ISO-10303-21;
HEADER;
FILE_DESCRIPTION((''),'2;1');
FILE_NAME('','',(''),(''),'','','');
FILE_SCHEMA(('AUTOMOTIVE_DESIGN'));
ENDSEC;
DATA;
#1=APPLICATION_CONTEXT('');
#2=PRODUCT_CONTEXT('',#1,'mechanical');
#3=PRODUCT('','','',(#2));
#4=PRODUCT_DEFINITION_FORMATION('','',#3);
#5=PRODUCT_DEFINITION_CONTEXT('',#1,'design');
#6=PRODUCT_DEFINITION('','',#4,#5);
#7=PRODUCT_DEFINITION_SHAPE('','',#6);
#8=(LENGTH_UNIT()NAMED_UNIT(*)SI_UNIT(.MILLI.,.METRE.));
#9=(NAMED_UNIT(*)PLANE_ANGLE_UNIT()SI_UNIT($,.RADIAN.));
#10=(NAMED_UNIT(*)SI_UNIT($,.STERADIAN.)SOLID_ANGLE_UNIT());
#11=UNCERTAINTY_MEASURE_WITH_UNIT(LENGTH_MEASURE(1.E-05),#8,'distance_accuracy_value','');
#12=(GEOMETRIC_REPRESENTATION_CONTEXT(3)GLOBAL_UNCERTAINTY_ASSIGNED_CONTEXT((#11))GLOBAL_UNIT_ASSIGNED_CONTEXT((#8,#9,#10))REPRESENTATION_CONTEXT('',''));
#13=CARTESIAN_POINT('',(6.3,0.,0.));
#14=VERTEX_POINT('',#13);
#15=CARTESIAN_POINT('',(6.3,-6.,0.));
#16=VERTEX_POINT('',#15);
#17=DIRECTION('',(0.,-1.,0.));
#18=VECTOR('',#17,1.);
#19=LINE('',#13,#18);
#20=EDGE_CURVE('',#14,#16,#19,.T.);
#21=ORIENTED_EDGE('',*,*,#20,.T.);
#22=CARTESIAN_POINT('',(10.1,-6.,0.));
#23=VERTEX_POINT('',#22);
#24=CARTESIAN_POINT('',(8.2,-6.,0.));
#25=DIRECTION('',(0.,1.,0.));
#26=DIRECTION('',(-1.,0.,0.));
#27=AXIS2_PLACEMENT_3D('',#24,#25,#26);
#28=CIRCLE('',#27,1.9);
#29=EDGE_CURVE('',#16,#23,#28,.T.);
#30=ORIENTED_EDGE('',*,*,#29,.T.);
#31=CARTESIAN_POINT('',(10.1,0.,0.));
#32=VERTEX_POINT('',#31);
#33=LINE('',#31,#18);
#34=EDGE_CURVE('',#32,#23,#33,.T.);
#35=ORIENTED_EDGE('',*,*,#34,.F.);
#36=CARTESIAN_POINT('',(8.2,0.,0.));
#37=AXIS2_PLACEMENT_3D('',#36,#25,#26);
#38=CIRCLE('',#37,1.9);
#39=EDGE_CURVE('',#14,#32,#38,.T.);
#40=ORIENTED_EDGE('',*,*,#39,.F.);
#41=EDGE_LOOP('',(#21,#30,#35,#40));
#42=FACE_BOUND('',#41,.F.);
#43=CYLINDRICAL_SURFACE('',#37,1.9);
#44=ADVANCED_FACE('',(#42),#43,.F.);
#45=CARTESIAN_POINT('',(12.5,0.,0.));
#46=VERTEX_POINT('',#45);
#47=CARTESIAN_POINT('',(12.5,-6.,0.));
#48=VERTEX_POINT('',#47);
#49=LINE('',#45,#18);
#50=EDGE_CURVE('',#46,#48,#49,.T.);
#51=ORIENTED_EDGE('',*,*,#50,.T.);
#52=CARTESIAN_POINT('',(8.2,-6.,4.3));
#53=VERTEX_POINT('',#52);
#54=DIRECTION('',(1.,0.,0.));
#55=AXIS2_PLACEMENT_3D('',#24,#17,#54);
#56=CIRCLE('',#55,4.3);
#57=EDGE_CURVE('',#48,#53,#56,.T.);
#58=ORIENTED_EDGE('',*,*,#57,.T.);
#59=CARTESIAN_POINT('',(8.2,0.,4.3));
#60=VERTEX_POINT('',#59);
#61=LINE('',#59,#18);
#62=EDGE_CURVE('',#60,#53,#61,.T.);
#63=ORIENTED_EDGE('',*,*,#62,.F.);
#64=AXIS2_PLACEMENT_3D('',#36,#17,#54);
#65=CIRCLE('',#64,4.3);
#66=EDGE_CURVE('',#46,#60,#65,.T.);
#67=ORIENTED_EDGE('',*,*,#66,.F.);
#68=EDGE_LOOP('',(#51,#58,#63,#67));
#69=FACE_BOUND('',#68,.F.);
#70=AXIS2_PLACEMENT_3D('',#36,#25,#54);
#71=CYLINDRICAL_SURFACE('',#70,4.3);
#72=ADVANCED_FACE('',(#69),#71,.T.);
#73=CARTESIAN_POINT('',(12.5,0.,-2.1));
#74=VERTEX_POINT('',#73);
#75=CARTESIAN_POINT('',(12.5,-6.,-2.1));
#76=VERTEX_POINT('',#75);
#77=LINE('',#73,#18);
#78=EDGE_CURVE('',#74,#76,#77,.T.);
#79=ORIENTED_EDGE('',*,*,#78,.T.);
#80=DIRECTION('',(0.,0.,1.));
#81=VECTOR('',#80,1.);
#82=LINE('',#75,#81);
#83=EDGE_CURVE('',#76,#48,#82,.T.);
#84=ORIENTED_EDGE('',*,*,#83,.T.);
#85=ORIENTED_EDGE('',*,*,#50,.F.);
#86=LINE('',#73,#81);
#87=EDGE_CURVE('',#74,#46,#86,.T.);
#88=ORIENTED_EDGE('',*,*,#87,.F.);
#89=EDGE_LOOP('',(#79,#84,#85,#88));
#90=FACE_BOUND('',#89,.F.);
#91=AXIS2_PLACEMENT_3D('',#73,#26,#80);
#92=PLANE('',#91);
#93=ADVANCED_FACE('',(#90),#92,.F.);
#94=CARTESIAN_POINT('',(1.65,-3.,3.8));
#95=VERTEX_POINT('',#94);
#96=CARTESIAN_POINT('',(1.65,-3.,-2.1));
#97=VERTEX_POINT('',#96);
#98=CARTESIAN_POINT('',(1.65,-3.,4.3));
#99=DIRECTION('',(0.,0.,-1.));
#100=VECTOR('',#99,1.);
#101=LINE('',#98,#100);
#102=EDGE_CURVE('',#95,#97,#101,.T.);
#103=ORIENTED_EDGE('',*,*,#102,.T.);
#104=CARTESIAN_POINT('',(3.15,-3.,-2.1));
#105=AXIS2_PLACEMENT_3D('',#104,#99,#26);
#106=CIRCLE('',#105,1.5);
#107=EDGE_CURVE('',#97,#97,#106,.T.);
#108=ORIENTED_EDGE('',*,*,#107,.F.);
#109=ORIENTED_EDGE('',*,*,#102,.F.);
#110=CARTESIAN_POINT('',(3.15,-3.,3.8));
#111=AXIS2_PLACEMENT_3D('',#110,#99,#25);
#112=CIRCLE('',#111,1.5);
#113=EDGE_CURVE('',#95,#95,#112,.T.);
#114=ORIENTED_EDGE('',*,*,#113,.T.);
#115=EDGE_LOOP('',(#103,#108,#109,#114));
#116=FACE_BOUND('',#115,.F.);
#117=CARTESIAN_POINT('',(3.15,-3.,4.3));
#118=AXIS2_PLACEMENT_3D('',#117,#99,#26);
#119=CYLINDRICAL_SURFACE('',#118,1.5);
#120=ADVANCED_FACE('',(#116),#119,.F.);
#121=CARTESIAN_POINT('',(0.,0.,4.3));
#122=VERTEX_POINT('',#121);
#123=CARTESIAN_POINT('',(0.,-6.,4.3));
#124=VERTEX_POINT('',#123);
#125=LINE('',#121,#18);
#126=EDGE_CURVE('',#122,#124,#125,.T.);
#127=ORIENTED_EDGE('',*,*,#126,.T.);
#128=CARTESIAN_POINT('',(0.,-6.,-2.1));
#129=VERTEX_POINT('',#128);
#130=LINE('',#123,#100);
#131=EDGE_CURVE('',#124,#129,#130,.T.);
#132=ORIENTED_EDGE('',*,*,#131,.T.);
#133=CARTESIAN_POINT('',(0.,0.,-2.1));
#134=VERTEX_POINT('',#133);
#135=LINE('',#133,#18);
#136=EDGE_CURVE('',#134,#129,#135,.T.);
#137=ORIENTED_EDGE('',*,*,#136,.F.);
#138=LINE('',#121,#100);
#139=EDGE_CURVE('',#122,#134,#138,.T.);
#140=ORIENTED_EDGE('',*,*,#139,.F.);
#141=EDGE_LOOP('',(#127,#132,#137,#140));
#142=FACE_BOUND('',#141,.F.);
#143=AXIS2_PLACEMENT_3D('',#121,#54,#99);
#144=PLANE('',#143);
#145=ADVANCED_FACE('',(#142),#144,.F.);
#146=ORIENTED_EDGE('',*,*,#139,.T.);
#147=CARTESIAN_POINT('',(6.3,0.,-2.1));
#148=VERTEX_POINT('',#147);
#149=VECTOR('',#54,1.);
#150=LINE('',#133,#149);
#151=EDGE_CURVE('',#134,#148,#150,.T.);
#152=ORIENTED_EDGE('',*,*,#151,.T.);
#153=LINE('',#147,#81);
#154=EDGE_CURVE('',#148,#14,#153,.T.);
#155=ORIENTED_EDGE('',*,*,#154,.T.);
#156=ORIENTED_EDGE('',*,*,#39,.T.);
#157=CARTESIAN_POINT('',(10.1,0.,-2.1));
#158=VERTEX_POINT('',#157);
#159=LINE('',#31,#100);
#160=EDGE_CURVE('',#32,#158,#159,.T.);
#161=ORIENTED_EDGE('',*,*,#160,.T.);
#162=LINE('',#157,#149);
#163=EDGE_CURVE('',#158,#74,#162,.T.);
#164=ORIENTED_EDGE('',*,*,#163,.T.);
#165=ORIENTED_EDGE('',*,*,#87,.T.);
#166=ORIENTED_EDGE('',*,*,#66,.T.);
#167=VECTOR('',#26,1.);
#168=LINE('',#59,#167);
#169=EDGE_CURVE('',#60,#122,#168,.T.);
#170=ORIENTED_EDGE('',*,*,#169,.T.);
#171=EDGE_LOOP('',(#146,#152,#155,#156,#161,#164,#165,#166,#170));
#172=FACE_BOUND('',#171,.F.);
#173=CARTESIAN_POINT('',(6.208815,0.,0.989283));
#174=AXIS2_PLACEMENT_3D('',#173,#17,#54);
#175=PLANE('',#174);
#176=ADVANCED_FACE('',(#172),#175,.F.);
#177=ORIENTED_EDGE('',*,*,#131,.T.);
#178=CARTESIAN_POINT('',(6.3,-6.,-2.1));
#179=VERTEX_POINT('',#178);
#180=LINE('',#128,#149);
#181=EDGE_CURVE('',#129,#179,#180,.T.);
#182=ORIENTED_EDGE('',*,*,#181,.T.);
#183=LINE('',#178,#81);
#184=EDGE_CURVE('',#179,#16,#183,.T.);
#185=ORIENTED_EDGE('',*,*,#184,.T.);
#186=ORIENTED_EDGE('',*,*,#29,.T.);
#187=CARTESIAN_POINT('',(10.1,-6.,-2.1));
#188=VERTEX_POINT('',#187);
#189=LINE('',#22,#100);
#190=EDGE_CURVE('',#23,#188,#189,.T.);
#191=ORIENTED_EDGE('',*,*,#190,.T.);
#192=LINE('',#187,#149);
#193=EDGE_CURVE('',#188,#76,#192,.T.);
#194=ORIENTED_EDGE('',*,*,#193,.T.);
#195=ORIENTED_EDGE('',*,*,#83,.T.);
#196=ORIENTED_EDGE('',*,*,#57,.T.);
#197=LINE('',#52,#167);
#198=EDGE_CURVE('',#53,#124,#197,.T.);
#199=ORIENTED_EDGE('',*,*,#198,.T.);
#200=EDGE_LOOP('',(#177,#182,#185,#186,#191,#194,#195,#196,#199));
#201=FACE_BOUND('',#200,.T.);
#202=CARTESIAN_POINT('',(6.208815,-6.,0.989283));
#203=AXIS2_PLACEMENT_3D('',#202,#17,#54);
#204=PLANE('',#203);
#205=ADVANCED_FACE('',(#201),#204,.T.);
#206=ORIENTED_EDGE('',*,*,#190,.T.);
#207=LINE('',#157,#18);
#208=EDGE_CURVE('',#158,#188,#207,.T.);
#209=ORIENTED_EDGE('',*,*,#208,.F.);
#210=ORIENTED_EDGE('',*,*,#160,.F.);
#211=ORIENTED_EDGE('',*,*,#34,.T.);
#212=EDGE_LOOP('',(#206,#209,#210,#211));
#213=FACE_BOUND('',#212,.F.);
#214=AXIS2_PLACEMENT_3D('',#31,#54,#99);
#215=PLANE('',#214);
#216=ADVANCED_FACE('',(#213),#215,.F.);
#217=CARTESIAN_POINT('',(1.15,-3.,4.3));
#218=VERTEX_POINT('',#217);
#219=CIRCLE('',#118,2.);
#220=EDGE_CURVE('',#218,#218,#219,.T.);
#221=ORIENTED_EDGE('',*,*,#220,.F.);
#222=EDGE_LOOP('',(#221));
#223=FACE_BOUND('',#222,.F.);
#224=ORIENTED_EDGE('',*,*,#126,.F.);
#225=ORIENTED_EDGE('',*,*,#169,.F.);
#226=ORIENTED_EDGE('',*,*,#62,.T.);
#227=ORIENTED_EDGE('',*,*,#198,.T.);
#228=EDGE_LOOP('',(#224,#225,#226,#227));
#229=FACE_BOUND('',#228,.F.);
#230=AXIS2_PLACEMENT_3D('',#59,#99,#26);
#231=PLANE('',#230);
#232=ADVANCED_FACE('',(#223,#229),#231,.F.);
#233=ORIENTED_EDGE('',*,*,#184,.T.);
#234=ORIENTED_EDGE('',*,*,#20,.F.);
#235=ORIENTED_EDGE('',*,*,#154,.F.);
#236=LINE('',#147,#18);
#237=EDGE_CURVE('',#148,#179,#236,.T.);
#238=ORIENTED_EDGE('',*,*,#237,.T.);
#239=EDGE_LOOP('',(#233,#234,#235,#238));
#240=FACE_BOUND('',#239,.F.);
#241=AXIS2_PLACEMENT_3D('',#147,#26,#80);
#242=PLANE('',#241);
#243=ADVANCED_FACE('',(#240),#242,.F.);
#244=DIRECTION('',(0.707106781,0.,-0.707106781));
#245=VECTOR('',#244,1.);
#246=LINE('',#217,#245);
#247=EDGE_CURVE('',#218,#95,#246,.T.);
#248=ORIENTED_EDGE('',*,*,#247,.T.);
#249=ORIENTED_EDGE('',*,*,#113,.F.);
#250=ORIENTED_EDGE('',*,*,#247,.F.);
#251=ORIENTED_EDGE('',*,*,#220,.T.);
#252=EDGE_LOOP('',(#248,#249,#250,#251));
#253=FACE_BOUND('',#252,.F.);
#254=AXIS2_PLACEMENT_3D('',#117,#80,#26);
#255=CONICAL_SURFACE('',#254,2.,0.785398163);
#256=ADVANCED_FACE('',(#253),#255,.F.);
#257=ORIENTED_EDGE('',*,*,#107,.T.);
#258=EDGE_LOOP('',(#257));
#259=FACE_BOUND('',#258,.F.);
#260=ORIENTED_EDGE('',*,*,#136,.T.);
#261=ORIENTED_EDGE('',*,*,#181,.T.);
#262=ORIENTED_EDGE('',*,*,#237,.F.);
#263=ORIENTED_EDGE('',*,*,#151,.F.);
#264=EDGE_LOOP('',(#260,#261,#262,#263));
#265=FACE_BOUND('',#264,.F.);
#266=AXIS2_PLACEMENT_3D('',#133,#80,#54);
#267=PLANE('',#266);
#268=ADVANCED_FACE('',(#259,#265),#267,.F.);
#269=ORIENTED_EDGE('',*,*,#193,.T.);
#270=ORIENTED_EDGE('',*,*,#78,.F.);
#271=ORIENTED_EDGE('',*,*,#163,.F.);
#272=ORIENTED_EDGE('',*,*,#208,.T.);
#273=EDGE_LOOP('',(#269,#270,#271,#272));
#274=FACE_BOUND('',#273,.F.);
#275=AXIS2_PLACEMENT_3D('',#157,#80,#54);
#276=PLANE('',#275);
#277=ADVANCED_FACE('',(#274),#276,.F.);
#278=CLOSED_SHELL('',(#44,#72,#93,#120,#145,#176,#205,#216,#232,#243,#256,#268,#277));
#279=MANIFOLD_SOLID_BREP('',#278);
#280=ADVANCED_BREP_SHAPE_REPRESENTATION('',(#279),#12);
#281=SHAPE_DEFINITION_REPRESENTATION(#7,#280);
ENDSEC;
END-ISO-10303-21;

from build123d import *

# Parameters (mm, degrees)
F1_DEPTH       = 6
F3_D           = 3
F3_CSINK_D     = 4
F3_CSINK_ANGLE = 90


# Not quite as in the source:
# - a feature names something its author has since deleted; it is built from what else it names


with BuildPart() as f1:
    # F0 (on Front) → F1 (new body)
    with BuildSketch(Plane.XZ):
        with BuildLine():
            Line((12.5, -2.1), (12.5, 0))
            ThreePointArc((12.5, 0), (11.2405591591, 3.0405591591), (8.2, 4.3))
            Line((8.2, 4.3), (0, 4.3))
            Line((0, 4.3), (0, -2.1))
            Line((0, -2.1), (6.3, -2.1))
            Line((6.3, -2.1), (6.3, 0))
            ThreePointArc((6.3, 0), (8.2, 1.9), (10.1, 0))
            Line((10.1, 0), (10.1, -2.1))
            Line((10.1, -2.1), (12.5, -2.1))
        make_face()
    extrude(amount=F1_DEPTH)

    # F3 (through all)
    with Locations(Plane.XY.offset(4.3)):
        with Locations((3.15, -3)):
            CounterSinkHole(F3_D / 2, F3_CSINK_D / 2, counter_sink_angle=F3_CSINK_ANGLE)


solid = f1.part
